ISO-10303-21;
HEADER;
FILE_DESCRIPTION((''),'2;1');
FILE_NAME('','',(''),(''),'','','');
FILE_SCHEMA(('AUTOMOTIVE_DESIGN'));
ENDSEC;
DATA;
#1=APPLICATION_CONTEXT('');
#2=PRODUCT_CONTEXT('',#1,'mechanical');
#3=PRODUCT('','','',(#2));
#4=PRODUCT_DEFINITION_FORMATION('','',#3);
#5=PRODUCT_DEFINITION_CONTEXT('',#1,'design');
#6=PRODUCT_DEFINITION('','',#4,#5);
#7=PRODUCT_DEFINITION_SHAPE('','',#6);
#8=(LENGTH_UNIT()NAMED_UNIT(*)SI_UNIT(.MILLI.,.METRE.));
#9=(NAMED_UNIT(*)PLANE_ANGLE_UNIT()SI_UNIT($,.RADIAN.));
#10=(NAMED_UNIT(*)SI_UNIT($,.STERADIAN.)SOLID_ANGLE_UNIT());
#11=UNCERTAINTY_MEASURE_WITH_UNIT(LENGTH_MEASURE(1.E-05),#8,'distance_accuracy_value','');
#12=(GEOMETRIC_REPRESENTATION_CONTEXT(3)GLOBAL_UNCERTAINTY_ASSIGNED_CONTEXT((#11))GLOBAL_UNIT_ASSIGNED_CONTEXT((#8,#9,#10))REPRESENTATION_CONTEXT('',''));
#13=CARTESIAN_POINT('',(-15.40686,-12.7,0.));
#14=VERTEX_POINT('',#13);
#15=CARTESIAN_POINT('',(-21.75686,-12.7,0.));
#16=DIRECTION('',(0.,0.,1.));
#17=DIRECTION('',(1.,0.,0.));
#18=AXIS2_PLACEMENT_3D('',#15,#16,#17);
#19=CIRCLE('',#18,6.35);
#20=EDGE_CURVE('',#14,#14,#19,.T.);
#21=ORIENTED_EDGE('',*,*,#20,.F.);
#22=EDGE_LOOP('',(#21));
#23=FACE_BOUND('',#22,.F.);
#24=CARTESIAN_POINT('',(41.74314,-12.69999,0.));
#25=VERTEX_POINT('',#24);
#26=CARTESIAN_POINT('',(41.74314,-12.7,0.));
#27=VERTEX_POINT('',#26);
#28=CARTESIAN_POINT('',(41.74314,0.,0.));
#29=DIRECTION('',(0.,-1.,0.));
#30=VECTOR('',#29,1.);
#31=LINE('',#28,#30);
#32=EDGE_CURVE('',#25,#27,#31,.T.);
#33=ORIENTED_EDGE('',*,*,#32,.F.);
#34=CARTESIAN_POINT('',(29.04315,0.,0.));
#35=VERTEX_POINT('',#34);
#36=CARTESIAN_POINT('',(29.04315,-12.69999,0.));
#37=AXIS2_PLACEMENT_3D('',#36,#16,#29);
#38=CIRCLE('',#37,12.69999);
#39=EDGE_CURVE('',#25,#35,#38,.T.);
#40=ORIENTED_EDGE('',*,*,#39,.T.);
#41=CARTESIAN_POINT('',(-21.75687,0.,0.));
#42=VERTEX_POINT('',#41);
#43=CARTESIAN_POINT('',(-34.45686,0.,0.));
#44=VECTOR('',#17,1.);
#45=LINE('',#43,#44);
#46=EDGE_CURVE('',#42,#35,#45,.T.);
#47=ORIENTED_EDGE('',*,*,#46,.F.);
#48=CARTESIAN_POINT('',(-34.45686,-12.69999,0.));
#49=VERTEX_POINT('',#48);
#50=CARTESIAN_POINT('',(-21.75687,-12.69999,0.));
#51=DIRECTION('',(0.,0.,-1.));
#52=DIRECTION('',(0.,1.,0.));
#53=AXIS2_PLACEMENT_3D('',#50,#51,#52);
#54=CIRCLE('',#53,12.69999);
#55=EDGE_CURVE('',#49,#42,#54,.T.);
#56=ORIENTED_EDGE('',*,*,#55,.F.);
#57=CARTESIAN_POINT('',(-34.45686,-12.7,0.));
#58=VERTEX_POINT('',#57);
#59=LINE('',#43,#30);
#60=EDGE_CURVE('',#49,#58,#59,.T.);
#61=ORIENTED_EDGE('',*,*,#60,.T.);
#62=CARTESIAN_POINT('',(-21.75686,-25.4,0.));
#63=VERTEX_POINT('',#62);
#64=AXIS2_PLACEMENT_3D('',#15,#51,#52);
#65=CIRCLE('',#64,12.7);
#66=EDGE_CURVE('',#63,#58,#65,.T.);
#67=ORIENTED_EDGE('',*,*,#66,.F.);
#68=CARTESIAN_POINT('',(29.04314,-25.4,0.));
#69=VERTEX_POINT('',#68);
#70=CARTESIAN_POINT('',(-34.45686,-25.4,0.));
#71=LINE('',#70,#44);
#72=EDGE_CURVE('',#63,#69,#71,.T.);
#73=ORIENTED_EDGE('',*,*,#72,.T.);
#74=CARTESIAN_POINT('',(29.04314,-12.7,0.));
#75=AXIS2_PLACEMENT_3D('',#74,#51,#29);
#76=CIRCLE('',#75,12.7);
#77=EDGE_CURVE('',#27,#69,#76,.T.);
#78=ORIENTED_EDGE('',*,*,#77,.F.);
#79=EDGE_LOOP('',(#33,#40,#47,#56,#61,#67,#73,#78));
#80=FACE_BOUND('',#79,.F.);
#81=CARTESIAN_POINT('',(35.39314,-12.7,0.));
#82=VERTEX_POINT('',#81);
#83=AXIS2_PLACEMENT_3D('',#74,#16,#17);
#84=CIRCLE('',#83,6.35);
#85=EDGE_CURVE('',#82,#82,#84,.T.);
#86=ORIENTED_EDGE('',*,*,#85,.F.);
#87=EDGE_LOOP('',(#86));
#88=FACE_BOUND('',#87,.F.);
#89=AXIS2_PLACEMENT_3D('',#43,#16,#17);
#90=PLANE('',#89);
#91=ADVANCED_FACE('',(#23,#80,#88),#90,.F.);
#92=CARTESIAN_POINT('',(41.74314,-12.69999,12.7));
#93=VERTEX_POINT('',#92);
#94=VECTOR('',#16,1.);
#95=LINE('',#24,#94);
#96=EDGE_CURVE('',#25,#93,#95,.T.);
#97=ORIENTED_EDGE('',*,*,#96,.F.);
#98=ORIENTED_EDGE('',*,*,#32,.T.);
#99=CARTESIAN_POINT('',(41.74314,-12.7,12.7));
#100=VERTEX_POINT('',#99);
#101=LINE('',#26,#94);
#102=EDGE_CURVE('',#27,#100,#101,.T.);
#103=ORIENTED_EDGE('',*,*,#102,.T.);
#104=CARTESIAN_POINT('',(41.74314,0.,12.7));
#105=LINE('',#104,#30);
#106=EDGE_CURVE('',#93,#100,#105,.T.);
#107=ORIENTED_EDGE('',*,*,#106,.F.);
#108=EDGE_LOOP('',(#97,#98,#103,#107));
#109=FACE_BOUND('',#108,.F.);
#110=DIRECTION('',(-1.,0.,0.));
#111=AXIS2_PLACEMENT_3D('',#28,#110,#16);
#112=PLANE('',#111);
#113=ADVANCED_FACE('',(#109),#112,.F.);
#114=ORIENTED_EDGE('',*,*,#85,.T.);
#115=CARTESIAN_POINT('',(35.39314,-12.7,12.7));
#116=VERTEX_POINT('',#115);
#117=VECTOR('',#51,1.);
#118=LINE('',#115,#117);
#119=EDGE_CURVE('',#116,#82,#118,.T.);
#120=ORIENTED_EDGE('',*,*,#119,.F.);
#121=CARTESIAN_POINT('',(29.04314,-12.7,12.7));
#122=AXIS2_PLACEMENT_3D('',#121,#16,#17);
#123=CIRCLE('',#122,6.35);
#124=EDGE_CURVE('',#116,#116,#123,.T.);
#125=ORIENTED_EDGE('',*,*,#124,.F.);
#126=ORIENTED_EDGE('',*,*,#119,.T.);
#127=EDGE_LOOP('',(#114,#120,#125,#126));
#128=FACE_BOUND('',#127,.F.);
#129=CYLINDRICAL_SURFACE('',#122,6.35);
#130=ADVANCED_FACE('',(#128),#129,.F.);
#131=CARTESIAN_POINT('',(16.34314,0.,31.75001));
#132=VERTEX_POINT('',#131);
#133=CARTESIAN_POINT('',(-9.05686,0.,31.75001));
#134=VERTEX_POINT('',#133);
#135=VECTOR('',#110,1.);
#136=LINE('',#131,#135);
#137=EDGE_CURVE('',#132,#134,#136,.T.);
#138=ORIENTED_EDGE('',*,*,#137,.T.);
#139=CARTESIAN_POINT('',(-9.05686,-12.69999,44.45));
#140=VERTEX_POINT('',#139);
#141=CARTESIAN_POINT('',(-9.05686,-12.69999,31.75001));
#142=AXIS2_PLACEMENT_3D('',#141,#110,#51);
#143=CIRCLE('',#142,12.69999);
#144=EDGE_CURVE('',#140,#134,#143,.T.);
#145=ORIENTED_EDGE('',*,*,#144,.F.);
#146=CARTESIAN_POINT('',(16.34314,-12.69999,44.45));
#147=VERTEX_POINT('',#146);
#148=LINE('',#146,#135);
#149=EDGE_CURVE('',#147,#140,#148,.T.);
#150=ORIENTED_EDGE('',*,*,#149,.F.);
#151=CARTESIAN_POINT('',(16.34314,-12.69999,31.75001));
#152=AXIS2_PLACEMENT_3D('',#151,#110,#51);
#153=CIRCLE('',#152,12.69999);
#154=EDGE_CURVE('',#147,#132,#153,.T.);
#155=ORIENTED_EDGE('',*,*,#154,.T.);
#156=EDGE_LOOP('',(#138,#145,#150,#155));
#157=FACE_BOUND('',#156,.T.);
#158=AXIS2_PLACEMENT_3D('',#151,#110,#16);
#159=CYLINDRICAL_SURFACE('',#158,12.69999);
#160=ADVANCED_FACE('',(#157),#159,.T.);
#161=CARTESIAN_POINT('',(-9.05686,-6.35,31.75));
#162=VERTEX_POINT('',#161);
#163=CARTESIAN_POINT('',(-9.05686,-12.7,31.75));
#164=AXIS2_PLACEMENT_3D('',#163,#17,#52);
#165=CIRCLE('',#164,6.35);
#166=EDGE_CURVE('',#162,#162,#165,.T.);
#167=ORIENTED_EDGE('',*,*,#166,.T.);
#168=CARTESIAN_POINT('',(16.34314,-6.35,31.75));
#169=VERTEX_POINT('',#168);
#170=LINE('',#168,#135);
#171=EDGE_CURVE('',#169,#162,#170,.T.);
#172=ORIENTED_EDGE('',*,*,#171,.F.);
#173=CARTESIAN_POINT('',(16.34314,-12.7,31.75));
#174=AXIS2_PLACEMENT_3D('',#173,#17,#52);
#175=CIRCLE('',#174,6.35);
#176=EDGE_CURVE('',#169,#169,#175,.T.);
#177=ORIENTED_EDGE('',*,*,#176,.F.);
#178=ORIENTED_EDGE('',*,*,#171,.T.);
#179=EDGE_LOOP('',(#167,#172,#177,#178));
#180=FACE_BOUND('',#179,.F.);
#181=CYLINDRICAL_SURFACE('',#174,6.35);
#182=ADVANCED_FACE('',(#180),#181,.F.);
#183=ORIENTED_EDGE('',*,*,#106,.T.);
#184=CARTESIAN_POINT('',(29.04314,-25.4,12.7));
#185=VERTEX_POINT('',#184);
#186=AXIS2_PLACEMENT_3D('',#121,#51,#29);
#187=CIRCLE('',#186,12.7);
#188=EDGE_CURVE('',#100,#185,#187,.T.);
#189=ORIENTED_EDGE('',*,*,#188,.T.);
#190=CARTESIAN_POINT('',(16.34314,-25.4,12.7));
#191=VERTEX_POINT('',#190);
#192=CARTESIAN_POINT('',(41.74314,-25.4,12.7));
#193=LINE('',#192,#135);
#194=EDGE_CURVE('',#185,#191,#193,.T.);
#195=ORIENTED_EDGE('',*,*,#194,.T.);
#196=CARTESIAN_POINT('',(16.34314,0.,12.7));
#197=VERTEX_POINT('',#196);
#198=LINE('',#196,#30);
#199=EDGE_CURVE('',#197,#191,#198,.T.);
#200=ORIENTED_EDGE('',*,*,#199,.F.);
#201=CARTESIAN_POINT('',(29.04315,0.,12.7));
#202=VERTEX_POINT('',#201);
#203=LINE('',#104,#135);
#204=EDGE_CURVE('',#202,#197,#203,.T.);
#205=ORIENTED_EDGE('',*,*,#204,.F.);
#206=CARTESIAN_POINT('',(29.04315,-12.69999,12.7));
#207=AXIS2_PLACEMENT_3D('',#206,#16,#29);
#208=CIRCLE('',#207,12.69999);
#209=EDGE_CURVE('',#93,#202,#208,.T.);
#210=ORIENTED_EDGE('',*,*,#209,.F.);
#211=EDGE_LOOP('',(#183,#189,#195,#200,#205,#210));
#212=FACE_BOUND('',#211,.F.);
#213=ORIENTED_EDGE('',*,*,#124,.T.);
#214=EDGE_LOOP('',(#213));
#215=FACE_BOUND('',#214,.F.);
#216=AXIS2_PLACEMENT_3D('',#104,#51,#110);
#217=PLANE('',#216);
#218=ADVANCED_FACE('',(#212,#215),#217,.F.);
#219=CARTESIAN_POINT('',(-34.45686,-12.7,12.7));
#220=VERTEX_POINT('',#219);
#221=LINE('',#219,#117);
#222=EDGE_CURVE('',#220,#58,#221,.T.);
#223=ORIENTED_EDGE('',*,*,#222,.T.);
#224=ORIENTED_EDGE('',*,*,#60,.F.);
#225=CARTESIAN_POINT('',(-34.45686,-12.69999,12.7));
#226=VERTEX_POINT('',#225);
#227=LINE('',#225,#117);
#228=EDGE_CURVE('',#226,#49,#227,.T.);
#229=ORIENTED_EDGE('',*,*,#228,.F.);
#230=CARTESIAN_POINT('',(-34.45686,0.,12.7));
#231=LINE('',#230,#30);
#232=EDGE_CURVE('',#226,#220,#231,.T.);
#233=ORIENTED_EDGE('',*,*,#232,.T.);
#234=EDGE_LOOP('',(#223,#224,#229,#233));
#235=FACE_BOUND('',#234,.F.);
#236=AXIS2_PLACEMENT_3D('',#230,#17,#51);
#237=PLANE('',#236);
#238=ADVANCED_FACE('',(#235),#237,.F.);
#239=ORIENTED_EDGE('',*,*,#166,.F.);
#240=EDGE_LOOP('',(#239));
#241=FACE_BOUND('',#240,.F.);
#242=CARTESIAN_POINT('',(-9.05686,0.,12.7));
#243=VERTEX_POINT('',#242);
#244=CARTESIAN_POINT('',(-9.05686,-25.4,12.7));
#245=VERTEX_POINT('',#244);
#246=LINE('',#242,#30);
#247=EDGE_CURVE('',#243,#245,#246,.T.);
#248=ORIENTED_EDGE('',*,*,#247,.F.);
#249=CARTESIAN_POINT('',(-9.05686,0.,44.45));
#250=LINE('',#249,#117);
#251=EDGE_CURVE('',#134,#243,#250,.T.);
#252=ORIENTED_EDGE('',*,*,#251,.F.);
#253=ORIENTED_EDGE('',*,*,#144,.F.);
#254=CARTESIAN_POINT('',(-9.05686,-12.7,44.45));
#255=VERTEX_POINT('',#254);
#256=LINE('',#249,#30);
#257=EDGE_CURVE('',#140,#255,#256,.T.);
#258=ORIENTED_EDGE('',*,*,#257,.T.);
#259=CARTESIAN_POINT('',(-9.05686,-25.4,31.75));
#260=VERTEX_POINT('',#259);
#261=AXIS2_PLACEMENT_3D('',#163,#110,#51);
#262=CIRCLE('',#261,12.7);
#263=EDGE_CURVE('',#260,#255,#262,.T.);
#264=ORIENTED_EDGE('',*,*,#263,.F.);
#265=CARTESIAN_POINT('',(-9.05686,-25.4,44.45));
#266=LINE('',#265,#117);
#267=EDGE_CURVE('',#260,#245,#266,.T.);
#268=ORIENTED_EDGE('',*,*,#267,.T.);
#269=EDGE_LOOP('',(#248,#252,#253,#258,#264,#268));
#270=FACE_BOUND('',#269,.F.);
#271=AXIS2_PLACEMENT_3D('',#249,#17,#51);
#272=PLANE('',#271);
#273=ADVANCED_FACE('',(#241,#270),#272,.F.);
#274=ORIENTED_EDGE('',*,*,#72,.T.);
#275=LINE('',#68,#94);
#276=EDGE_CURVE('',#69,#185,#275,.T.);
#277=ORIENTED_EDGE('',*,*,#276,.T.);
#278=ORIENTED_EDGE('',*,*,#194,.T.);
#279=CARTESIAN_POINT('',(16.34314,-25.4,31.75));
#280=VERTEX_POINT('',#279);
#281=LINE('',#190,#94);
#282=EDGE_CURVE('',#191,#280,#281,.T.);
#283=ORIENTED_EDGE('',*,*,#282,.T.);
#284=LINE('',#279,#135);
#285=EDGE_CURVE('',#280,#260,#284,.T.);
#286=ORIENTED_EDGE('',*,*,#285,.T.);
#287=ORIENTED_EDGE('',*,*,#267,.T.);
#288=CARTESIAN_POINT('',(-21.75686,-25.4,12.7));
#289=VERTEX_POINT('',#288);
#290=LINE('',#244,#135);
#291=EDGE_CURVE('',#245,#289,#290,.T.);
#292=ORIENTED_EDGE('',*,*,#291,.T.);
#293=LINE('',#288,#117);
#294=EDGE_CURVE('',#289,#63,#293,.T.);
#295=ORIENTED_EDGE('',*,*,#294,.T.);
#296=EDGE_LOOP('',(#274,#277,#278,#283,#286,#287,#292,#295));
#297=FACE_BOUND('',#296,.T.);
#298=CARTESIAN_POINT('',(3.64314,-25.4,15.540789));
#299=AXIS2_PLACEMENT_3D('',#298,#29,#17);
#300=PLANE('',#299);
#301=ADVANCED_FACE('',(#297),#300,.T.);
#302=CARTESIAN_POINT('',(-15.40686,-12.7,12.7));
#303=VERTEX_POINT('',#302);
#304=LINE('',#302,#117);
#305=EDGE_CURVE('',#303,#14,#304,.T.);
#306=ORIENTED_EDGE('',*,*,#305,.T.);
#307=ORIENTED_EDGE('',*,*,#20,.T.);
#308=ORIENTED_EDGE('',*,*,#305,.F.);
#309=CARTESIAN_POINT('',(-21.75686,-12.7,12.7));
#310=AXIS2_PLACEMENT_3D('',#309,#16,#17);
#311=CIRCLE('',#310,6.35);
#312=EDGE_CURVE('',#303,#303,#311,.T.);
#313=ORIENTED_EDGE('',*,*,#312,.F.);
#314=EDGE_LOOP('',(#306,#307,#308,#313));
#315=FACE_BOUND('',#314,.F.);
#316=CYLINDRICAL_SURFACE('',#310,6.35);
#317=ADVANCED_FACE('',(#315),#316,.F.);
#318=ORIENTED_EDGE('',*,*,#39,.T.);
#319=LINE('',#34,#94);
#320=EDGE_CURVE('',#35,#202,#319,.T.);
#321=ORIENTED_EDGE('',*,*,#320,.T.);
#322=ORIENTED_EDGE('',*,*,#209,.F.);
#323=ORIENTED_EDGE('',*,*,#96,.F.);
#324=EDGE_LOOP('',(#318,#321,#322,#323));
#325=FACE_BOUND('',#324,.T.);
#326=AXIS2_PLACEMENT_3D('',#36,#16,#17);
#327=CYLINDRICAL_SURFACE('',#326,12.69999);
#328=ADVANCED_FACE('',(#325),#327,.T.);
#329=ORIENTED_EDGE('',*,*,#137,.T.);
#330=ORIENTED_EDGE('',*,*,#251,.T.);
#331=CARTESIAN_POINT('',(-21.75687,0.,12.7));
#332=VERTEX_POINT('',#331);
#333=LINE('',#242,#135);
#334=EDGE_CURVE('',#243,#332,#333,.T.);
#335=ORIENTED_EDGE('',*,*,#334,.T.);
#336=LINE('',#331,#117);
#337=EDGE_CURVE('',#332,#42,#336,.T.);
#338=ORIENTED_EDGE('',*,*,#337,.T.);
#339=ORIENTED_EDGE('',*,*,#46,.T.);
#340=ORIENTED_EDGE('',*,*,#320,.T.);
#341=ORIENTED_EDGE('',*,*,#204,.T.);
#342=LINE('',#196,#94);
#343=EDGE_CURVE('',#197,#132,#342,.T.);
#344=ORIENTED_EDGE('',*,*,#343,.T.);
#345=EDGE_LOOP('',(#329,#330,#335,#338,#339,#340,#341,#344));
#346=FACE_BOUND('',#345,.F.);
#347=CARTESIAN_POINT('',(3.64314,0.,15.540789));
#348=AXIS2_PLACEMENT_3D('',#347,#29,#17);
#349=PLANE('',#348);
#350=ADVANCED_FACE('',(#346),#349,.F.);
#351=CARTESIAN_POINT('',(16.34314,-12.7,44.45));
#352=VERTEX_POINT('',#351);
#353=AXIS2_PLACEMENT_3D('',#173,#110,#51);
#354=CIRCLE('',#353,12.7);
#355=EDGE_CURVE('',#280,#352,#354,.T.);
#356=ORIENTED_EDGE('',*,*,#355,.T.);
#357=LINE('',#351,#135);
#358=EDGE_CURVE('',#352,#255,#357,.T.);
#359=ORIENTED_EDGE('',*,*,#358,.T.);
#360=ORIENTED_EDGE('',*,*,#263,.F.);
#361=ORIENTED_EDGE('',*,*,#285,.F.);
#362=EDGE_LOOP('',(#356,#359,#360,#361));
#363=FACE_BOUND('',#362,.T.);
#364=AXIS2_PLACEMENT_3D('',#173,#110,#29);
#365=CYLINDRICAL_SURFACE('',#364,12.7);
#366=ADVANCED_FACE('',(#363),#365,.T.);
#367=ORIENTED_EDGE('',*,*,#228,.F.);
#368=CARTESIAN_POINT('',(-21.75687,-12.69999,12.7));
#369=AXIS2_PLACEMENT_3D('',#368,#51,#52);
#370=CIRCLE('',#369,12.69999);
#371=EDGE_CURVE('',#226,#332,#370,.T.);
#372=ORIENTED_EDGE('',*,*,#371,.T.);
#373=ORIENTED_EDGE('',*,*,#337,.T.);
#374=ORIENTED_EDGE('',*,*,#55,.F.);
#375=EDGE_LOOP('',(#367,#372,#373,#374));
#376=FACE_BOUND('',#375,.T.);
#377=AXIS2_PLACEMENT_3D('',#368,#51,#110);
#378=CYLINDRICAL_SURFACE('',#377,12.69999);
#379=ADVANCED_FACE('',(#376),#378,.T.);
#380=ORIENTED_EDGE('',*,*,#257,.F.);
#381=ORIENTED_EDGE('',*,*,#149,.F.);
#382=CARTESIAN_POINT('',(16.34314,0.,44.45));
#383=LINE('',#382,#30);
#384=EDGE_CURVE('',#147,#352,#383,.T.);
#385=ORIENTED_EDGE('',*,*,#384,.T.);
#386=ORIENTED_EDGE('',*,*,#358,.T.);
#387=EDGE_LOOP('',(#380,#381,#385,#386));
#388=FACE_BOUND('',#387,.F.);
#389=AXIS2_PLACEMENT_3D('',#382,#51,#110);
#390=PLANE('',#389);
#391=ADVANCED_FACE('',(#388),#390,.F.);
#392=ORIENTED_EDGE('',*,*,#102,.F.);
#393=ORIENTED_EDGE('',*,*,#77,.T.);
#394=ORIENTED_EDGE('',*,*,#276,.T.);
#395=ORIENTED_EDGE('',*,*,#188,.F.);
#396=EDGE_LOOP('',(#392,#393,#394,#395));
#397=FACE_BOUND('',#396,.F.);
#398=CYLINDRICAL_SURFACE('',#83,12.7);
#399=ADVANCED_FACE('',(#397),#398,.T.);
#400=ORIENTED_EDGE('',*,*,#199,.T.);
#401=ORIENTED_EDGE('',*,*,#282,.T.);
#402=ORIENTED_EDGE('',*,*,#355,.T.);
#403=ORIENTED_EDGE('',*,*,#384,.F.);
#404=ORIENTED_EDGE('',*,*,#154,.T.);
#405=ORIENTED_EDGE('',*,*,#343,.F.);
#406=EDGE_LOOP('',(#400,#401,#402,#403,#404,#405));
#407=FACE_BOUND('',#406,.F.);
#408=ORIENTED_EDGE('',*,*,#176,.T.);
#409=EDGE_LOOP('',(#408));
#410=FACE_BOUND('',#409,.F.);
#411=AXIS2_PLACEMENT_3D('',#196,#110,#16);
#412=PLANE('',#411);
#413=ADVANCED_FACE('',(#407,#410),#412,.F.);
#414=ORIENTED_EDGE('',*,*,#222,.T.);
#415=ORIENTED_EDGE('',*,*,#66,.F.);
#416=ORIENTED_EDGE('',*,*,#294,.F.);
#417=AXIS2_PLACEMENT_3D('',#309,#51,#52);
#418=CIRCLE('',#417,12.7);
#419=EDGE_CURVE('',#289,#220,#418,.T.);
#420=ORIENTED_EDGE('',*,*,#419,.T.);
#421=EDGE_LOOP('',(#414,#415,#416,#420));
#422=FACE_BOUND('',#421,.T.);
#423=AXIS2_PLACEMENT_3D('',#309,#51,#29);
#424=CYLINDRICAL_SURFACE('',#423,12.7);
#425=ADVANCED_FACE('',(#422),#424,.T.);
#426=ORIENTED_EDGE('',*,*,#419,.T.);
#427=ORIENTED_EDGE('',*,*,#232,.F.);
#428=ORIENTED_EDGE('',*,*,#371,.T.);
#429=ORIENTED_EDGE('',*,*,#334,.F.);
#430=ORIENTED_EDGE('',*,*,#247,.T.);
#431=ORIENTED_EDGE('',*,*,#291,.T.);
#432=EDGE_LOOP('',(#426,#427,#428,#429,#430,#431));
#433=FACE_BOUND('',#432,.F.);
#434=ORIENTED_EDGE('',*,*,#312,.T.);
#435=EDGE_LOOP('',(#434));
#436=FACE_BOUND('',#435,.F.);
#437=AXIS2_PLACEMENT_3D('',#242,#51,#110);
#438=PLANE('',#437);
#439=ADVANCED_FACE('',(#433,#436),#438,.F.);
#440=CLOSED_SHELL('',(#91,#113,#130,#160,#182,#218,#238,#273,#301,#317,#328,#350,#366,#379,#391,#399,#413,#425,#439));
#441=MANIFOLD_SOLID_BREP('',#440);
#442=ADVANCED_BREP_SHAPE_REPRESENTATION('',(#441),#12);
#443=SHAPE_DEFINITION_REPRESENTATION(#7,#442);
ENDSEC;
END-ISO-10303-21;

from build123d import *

# Parameters (mm, degrees)
F1_DEPTH  = 25.4
F2_R      = 12.7
F3_R      = 12.69999
F4_R      = 12.7
F5_R      = 12.69999
F6_R      = 12.7
F7_R      = 12.69999
F8_R      = 6.35
F9_DEPTH  = 25.4
F10_R     = 6.35
F11_DEPTH = 25.4
F12_R     = 6.35
F13_DEPTH = 25.4


# Not quite as in the source:
# - a fillet or chamfer is up to 0.001 mm smaller than in the source, because OpenCascade refuses the exact size


with BuildPart() as f1:
    # F0 (on Front) → F1 (new body)
    with BuildSketch(Plane.XZ):
        Polygon((-34.4568602741, 12.7), (-34.4568602741, 0), (41.7431397259, 0), (41.7431397259, 12.7), (16.3431397259, 12.7), (16.3431397259, 44.45), (-9.0568602741, 44.45), (-9.0568602741, 12.7), align=None)
    extrude(amount=F1_DEPTH)

    # F2
    f2_edges = [f1.edges().sort_by_distance(p)[0] for p in [
        (41.74314, -25.4, 6.35),
    ]]
    fillet(f2_edges, radius=F2_R)

    # F3 (radius 12.7 in the source; OpenCascade refuses exactly that, so slightly less here)
    f3_edges = [f1.edges().sort_by_distance(p)[0] for p in [
        (41.74314, 0, 6.35),
    ]]
    fillet(f3_edges, radius=F3_R)

    # F4
    f4_edges = [f1.edges().sort_by_distance(p)[0] for p in [
        (-34.45686, -25.4, 6.35),
    ]]
    fillet(f4_edges, radius=F4_R)

    # F5 (radius 12.7 in the source; OpenCascade refuses exactly that, so slightly less here)
    f5_edges = [f1.edges().sort_by_distance(p)[0] for p in [
        (-34.45686, 0, 6.35),
    ]]
    fillet(f5_edges, radius=F5_R)

    # F6
    f6_edges = [f1.edges().sort_by_distance(p)[0] for p in [
        (3.64314, -25.4, 44.45),
    ]]
    fillet(f6_edges, radius=F6_R)

    # F7 (radius 12.7 in the source; OpenCascade refuses exactly that, so slightly less here)
    f7_edges = [f1.edges().sort_by_distance(p)[0] for p in [
        (3.64314, 0, 44.45),
    ]]
    fillet(f7_edges, radius=F7_R)

    # F8 (on face) → F9 (cut)
    with BuildSketch(Plane.XY.offset(12.7)):
        with Locations((29.0431397259, -12.7)):
            Circle(F8_R)
    extrude(amount=-F9_DEPTH, mode=Mode.SUBTRACT)

    # F10 (on face) → F11 (cut)
    with BuildSketch(Plane.XY.offset(12.7)):
        with Locations((-21.7568602741, -12.7)):
            Circle(F10_R)
    extrude(amount=-F11_DEPTH, mode=Mode.SUBTRACT)

    # F12 (on face) → F13 (cut)
    with BuildSketch(Plane.YZ.offset(16.3431397259)):
        with Locations((-12.7, 31.75)):
            Circle(F12_R)
    extrude(amount=-F13_DEPTH, mode=Mode.SUBTRACT)


solid = f1.part
